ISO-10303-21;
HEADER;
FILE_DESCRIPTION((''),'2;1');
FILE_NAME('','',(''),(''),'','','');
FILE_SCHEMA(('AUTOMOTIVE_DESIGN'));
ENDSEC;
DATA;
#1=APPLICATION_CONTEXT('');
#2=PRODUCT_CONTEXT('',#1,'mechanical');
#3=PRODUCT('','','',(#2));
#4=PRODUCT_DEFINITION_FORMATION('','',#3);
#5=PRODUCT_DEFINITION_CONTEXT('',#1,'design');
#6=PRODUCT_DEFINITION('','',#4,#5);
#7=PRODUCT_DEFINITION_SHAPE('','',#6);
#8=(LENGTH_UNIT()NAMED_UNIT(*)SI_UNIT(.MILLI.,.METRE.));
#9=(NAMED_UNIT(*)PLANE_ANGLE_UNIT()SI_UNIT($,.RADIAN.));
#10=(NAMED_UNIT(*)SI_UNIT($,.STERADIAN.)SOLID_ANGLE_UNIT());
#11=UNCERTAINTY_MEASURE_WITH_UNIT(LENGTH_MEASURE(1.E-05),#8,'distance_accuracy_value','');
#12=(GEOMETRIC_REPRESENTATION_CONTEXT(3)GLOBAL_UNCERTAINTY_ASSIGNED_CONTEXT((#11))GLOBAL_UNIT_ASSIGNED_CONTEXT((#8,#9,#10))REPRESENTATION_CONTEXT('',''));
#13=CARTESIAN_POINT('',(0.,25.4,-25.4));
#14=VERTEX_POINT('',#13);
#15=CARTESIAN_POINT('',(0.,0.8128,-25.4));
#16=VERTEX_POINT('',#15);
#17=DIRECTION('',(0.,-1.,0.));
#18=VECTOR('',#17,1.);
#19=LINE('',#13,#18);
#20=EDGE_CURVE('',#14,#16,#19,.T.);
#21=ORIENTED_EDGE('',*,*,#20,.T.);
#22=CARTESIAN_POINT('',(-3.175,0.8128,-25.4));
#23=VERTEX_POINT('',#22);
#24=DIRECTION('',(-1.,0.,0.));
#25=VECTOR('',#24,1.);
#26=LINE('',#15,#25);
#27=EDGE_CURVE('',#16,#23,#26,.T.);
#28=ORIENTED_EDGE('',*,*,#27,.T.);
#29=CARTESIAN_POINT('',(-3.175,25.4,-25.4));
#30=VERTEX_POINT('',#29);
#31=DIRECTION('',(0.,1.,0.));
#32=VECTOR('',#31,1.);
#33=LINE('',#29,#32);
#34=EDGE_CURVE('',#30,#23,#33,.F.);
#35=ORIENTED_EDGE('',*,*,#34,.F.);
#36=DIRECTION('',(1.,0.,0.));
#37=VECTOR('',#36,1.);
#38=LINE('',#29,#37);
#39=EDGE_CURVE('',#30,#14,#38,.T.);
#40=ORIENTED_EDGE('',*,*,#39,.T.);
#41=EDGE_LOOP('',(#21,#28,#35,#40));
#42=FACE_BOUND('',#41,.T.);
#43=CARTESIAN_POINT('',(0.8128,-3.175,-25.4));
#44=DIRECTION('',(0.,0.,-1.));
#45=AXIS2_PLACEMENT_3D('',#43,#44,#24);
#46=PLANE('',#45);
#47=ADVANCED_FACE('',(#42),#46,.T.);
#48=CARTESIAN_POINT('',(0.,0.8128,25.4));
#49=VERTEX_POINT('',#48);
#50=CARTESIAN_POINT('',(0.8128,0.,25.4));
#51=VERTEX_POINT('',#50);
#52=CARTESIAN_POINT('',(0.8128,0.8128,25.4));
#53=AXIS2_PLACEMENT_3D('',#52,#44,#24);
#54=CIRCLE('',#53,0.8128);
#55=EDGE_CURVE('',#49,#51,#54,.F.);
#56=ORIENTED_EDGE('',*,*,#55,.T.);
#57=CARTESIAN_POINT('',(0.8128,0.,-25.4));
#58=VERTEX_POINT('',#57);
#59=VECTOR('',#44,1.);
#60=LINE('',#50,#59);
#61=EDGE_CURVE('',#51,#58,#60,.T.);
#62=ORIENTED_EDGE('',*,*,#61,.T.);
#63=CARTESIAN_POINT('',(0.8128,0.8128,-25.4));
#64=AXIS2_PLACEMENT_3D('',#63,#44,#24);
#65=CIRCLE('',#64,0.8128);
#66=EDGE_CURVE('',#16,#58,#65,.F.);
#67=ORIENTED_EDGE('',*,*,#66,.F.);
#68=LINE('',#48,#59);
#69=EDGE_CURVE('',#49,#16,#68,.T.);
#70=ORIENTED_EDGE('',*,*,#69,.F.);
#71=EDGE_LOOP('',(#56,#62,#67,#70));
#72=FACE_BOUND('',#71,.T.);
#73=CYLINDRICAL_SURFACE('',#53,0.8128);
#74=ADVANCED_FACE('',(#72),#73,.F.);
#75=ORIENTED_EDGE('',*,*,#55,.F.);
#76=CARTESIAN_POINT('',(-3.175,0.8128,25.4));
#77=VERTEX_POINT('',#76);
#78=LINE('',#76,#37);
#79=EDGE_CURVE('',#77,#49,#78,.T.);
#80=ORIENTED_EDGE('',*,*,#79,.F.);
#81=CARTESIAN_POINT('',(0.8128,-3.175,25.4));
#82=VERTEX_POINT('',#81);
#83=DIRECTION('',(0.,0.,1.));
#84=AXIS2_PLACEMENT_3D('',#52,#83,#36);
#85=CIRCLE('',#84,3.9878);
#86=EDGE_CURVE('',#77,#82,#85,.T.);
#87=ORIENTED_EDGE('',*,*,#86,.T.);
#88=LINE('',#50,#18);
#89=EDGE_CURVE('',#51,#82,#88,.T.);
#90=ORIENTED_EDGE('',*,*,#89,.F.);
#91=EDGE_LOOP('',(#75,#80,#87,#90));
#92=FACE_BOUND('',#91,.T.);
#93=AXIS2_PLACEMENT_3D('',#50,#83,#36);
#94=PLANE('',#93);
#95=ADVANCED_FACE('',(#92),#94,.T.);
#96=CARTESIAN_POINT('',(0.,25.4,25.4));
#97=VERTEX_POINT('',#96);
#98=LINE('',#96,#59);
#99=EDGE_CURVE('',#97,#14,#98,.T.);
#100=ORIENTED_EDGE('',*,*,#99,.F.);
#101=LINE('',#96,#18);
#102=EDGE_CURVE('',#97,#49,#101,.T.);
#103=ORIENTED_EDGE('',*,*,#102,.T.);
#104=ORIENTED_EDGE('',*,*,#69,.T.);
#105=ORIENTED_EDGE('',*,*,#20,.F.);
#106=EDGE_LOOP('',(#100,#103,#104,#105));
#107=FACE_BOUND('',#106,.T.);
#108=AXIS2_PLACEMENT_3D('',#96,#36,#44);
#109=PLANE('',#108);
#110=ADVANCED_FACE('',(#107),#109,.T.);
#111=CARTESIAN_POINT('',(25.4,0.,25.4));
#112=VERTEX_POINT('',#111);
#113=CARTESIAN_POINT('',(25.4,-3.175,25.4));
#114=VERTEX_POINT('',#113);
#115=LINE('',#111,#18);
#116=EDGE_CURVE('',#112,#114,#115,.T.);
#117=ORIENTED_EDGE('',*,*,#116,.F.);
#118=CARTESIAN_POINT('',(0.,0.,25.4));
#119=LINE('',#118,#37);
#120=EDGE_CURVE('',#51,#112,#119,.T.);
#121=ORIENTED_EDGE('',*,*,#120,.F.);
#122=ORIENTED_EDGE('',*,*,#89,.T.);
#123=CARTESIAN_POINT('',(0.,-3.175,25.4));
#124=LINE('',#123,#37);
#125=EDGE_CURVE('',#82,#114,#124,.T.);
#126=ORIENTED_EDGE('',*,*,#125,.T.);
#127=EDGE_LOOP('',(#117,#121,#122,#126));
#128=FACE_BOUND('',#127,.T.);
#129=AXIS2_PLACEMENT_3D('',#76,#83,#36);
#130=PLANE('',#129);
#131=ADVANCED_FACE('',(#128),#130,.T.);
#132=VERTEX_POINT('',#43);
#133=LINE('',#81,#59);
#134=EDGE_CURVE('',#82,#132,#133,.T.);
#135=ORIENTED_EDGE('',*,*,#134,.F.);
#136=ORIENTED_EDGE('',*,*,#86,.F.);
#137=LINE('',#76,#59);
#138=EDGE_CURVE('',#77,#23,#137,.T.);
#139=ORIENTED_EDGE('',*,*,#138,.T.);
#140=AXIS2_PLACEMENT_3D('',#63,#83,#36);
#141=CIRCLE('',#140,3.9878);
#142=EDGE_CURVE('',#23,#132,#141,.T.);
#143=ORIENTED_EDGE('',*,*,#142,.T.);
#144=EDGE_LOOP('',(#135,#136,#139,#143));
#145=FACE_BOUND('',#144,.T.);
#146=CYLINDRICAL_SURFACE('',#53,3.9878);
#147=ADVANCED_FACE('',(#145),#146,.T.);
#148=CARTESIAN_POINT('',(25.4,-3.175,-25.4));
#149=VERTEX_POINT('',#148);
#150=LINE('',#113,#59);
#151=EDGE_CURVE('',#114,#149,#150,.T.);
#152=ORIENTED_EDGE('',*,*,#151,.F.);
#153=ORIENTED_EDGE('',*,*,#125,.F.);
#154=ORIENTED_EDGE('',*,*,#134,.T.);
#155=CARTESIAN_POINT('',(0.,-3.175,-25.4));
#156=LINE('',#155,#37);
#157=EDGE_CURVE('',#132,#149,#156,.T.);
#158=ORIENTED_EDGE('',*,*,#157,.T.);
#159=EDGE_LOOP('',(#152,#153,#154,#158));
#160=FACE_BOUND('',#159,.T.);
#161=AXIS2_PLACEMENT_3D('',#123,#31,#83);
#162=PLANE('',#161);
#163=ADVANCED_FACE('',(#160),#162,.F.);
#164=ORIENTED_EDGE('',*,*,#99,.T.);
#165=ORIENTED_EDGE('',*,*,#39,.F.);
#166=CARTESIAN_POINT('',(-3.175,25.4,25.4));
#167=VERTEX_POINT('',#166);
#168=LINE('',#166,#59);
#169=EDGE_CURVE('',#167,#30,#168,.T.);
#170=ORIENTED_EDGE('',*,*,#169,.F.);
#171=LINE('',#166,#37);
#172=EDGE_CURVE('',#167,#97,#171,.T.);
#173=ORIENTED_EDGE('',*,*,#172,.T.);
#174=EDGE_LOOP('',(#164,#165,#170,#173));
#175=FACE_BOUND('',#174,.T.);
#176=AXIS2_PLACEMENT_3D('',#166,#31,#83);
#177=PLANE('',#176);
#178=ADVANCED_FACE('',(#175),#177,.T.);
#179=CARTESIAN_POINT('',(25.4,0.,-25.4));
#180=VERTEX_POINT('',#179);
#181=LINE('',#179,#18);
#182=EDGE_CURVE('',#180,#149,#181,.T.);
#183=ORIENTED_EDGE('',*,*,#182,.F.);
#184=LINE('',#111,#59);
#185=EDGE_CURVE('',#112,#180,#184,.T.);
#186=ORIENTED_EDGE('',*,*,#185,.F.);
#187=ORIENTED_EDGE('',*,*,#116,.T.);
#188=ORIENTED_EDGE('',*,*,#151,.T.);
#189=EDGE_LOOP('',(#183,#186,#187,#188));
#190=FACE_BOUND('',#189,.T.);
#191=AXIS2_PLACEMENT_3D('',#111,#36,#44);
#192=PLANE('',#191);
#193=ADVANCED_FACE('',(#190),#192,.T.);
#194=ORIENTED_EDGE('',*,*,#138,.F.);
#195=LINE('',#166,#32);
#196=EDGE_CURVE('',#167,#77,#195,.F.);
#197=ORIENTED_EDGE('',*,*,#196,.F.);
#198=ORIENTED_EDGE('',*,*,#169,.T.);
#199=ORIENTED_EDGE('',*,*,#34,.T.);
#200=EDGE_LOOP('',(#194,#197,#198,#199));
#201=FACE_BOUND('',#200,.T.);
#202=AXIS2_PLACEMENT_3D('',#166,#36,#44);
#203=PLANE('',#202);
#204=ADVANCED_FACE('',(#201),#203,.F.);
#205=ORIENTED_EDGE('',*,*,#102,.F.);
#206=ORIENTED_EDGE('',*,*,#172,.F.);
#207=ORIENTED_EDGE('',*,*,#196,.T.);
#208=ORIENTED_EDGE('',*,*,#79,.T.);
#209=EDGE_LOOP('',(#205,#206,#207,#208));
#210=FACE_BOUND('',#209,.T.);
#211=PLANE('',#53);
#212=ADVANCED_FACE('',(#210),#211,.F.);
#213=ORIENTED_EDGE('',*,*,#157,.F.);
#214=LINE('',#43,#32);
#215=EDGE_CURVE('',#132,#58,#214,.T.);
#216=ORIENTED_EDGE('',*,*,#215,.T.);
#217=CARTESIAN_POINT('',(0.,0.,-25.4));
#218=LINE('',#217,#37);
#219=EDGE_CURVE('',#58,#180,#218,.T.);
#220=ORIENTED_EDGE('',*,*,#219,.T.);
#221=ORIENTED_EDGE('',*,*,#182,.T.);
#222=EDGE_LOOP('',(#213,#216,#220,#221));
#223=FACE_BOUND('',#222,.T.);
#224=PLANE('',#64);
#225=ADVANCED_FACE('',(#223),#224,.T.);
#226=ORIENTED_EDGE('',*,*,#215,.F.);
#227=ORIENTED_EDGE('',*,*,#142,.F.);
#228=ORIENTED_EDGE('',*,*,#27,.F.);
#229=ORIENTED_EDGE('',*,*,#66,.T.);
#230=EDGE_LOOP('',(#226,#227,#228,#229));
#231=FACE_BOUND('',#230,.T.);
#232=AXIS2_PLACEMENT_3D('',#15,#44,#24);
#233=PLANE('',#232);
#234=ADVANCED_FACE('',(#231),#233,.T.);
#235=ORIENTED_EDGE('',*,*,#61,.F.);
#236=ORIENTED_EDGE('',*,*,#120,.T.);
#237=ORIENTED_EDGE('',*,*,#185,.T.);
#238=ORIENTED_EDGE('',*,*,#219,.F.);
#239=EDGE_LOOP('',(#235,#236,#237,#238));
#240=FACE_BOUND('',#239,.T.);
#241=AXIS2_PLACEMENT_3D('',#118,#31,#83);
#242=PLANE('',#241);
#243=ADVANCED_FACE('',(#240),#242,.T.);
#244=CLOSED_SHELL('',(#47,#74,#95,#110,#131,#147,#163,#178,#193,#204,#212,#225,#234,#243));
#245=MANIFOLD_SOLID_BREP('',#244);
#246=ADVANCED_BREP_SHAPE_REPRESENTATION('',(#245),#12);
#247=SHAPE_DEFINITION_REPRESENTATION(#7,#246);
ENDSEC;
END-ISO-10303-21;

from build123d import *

# Parameters (mm, degrees)
BASE_FLANGE1_DEPTH = 25.4


# Sheet-metal steps are written as plain solids
with BuildPart() as part:
    # Sketch1 → Base-Flange1 (new, symmetric)
    with BuildSketch(Plane.XY):
        with BuildLine():
            Line((0, 25.4), (0, 0.8128))
            ThreePointArc((0, 0.8128), (0.238063608, 0.238063608), (0.8128, 0))
            Line((0.8128, 0), (25.4, 0))
            Line((25.4, 0), (25.4, -3.175))
            Line((25.4, -3.175), (0.8128, -3.175))
            ThreePointArc((0.8128, -3.175), (-2.007000422, -2.007000422), (-3.175, 0.8128))
            Line((-3.175, 0.8128), (-3.175, 25.4))
            Line((-3.175, 25.4), (0, 25.4))
        make_face()
    extrude(amount=BASE_FLANGE1_DEPTH, both=True)


solid = part.part
